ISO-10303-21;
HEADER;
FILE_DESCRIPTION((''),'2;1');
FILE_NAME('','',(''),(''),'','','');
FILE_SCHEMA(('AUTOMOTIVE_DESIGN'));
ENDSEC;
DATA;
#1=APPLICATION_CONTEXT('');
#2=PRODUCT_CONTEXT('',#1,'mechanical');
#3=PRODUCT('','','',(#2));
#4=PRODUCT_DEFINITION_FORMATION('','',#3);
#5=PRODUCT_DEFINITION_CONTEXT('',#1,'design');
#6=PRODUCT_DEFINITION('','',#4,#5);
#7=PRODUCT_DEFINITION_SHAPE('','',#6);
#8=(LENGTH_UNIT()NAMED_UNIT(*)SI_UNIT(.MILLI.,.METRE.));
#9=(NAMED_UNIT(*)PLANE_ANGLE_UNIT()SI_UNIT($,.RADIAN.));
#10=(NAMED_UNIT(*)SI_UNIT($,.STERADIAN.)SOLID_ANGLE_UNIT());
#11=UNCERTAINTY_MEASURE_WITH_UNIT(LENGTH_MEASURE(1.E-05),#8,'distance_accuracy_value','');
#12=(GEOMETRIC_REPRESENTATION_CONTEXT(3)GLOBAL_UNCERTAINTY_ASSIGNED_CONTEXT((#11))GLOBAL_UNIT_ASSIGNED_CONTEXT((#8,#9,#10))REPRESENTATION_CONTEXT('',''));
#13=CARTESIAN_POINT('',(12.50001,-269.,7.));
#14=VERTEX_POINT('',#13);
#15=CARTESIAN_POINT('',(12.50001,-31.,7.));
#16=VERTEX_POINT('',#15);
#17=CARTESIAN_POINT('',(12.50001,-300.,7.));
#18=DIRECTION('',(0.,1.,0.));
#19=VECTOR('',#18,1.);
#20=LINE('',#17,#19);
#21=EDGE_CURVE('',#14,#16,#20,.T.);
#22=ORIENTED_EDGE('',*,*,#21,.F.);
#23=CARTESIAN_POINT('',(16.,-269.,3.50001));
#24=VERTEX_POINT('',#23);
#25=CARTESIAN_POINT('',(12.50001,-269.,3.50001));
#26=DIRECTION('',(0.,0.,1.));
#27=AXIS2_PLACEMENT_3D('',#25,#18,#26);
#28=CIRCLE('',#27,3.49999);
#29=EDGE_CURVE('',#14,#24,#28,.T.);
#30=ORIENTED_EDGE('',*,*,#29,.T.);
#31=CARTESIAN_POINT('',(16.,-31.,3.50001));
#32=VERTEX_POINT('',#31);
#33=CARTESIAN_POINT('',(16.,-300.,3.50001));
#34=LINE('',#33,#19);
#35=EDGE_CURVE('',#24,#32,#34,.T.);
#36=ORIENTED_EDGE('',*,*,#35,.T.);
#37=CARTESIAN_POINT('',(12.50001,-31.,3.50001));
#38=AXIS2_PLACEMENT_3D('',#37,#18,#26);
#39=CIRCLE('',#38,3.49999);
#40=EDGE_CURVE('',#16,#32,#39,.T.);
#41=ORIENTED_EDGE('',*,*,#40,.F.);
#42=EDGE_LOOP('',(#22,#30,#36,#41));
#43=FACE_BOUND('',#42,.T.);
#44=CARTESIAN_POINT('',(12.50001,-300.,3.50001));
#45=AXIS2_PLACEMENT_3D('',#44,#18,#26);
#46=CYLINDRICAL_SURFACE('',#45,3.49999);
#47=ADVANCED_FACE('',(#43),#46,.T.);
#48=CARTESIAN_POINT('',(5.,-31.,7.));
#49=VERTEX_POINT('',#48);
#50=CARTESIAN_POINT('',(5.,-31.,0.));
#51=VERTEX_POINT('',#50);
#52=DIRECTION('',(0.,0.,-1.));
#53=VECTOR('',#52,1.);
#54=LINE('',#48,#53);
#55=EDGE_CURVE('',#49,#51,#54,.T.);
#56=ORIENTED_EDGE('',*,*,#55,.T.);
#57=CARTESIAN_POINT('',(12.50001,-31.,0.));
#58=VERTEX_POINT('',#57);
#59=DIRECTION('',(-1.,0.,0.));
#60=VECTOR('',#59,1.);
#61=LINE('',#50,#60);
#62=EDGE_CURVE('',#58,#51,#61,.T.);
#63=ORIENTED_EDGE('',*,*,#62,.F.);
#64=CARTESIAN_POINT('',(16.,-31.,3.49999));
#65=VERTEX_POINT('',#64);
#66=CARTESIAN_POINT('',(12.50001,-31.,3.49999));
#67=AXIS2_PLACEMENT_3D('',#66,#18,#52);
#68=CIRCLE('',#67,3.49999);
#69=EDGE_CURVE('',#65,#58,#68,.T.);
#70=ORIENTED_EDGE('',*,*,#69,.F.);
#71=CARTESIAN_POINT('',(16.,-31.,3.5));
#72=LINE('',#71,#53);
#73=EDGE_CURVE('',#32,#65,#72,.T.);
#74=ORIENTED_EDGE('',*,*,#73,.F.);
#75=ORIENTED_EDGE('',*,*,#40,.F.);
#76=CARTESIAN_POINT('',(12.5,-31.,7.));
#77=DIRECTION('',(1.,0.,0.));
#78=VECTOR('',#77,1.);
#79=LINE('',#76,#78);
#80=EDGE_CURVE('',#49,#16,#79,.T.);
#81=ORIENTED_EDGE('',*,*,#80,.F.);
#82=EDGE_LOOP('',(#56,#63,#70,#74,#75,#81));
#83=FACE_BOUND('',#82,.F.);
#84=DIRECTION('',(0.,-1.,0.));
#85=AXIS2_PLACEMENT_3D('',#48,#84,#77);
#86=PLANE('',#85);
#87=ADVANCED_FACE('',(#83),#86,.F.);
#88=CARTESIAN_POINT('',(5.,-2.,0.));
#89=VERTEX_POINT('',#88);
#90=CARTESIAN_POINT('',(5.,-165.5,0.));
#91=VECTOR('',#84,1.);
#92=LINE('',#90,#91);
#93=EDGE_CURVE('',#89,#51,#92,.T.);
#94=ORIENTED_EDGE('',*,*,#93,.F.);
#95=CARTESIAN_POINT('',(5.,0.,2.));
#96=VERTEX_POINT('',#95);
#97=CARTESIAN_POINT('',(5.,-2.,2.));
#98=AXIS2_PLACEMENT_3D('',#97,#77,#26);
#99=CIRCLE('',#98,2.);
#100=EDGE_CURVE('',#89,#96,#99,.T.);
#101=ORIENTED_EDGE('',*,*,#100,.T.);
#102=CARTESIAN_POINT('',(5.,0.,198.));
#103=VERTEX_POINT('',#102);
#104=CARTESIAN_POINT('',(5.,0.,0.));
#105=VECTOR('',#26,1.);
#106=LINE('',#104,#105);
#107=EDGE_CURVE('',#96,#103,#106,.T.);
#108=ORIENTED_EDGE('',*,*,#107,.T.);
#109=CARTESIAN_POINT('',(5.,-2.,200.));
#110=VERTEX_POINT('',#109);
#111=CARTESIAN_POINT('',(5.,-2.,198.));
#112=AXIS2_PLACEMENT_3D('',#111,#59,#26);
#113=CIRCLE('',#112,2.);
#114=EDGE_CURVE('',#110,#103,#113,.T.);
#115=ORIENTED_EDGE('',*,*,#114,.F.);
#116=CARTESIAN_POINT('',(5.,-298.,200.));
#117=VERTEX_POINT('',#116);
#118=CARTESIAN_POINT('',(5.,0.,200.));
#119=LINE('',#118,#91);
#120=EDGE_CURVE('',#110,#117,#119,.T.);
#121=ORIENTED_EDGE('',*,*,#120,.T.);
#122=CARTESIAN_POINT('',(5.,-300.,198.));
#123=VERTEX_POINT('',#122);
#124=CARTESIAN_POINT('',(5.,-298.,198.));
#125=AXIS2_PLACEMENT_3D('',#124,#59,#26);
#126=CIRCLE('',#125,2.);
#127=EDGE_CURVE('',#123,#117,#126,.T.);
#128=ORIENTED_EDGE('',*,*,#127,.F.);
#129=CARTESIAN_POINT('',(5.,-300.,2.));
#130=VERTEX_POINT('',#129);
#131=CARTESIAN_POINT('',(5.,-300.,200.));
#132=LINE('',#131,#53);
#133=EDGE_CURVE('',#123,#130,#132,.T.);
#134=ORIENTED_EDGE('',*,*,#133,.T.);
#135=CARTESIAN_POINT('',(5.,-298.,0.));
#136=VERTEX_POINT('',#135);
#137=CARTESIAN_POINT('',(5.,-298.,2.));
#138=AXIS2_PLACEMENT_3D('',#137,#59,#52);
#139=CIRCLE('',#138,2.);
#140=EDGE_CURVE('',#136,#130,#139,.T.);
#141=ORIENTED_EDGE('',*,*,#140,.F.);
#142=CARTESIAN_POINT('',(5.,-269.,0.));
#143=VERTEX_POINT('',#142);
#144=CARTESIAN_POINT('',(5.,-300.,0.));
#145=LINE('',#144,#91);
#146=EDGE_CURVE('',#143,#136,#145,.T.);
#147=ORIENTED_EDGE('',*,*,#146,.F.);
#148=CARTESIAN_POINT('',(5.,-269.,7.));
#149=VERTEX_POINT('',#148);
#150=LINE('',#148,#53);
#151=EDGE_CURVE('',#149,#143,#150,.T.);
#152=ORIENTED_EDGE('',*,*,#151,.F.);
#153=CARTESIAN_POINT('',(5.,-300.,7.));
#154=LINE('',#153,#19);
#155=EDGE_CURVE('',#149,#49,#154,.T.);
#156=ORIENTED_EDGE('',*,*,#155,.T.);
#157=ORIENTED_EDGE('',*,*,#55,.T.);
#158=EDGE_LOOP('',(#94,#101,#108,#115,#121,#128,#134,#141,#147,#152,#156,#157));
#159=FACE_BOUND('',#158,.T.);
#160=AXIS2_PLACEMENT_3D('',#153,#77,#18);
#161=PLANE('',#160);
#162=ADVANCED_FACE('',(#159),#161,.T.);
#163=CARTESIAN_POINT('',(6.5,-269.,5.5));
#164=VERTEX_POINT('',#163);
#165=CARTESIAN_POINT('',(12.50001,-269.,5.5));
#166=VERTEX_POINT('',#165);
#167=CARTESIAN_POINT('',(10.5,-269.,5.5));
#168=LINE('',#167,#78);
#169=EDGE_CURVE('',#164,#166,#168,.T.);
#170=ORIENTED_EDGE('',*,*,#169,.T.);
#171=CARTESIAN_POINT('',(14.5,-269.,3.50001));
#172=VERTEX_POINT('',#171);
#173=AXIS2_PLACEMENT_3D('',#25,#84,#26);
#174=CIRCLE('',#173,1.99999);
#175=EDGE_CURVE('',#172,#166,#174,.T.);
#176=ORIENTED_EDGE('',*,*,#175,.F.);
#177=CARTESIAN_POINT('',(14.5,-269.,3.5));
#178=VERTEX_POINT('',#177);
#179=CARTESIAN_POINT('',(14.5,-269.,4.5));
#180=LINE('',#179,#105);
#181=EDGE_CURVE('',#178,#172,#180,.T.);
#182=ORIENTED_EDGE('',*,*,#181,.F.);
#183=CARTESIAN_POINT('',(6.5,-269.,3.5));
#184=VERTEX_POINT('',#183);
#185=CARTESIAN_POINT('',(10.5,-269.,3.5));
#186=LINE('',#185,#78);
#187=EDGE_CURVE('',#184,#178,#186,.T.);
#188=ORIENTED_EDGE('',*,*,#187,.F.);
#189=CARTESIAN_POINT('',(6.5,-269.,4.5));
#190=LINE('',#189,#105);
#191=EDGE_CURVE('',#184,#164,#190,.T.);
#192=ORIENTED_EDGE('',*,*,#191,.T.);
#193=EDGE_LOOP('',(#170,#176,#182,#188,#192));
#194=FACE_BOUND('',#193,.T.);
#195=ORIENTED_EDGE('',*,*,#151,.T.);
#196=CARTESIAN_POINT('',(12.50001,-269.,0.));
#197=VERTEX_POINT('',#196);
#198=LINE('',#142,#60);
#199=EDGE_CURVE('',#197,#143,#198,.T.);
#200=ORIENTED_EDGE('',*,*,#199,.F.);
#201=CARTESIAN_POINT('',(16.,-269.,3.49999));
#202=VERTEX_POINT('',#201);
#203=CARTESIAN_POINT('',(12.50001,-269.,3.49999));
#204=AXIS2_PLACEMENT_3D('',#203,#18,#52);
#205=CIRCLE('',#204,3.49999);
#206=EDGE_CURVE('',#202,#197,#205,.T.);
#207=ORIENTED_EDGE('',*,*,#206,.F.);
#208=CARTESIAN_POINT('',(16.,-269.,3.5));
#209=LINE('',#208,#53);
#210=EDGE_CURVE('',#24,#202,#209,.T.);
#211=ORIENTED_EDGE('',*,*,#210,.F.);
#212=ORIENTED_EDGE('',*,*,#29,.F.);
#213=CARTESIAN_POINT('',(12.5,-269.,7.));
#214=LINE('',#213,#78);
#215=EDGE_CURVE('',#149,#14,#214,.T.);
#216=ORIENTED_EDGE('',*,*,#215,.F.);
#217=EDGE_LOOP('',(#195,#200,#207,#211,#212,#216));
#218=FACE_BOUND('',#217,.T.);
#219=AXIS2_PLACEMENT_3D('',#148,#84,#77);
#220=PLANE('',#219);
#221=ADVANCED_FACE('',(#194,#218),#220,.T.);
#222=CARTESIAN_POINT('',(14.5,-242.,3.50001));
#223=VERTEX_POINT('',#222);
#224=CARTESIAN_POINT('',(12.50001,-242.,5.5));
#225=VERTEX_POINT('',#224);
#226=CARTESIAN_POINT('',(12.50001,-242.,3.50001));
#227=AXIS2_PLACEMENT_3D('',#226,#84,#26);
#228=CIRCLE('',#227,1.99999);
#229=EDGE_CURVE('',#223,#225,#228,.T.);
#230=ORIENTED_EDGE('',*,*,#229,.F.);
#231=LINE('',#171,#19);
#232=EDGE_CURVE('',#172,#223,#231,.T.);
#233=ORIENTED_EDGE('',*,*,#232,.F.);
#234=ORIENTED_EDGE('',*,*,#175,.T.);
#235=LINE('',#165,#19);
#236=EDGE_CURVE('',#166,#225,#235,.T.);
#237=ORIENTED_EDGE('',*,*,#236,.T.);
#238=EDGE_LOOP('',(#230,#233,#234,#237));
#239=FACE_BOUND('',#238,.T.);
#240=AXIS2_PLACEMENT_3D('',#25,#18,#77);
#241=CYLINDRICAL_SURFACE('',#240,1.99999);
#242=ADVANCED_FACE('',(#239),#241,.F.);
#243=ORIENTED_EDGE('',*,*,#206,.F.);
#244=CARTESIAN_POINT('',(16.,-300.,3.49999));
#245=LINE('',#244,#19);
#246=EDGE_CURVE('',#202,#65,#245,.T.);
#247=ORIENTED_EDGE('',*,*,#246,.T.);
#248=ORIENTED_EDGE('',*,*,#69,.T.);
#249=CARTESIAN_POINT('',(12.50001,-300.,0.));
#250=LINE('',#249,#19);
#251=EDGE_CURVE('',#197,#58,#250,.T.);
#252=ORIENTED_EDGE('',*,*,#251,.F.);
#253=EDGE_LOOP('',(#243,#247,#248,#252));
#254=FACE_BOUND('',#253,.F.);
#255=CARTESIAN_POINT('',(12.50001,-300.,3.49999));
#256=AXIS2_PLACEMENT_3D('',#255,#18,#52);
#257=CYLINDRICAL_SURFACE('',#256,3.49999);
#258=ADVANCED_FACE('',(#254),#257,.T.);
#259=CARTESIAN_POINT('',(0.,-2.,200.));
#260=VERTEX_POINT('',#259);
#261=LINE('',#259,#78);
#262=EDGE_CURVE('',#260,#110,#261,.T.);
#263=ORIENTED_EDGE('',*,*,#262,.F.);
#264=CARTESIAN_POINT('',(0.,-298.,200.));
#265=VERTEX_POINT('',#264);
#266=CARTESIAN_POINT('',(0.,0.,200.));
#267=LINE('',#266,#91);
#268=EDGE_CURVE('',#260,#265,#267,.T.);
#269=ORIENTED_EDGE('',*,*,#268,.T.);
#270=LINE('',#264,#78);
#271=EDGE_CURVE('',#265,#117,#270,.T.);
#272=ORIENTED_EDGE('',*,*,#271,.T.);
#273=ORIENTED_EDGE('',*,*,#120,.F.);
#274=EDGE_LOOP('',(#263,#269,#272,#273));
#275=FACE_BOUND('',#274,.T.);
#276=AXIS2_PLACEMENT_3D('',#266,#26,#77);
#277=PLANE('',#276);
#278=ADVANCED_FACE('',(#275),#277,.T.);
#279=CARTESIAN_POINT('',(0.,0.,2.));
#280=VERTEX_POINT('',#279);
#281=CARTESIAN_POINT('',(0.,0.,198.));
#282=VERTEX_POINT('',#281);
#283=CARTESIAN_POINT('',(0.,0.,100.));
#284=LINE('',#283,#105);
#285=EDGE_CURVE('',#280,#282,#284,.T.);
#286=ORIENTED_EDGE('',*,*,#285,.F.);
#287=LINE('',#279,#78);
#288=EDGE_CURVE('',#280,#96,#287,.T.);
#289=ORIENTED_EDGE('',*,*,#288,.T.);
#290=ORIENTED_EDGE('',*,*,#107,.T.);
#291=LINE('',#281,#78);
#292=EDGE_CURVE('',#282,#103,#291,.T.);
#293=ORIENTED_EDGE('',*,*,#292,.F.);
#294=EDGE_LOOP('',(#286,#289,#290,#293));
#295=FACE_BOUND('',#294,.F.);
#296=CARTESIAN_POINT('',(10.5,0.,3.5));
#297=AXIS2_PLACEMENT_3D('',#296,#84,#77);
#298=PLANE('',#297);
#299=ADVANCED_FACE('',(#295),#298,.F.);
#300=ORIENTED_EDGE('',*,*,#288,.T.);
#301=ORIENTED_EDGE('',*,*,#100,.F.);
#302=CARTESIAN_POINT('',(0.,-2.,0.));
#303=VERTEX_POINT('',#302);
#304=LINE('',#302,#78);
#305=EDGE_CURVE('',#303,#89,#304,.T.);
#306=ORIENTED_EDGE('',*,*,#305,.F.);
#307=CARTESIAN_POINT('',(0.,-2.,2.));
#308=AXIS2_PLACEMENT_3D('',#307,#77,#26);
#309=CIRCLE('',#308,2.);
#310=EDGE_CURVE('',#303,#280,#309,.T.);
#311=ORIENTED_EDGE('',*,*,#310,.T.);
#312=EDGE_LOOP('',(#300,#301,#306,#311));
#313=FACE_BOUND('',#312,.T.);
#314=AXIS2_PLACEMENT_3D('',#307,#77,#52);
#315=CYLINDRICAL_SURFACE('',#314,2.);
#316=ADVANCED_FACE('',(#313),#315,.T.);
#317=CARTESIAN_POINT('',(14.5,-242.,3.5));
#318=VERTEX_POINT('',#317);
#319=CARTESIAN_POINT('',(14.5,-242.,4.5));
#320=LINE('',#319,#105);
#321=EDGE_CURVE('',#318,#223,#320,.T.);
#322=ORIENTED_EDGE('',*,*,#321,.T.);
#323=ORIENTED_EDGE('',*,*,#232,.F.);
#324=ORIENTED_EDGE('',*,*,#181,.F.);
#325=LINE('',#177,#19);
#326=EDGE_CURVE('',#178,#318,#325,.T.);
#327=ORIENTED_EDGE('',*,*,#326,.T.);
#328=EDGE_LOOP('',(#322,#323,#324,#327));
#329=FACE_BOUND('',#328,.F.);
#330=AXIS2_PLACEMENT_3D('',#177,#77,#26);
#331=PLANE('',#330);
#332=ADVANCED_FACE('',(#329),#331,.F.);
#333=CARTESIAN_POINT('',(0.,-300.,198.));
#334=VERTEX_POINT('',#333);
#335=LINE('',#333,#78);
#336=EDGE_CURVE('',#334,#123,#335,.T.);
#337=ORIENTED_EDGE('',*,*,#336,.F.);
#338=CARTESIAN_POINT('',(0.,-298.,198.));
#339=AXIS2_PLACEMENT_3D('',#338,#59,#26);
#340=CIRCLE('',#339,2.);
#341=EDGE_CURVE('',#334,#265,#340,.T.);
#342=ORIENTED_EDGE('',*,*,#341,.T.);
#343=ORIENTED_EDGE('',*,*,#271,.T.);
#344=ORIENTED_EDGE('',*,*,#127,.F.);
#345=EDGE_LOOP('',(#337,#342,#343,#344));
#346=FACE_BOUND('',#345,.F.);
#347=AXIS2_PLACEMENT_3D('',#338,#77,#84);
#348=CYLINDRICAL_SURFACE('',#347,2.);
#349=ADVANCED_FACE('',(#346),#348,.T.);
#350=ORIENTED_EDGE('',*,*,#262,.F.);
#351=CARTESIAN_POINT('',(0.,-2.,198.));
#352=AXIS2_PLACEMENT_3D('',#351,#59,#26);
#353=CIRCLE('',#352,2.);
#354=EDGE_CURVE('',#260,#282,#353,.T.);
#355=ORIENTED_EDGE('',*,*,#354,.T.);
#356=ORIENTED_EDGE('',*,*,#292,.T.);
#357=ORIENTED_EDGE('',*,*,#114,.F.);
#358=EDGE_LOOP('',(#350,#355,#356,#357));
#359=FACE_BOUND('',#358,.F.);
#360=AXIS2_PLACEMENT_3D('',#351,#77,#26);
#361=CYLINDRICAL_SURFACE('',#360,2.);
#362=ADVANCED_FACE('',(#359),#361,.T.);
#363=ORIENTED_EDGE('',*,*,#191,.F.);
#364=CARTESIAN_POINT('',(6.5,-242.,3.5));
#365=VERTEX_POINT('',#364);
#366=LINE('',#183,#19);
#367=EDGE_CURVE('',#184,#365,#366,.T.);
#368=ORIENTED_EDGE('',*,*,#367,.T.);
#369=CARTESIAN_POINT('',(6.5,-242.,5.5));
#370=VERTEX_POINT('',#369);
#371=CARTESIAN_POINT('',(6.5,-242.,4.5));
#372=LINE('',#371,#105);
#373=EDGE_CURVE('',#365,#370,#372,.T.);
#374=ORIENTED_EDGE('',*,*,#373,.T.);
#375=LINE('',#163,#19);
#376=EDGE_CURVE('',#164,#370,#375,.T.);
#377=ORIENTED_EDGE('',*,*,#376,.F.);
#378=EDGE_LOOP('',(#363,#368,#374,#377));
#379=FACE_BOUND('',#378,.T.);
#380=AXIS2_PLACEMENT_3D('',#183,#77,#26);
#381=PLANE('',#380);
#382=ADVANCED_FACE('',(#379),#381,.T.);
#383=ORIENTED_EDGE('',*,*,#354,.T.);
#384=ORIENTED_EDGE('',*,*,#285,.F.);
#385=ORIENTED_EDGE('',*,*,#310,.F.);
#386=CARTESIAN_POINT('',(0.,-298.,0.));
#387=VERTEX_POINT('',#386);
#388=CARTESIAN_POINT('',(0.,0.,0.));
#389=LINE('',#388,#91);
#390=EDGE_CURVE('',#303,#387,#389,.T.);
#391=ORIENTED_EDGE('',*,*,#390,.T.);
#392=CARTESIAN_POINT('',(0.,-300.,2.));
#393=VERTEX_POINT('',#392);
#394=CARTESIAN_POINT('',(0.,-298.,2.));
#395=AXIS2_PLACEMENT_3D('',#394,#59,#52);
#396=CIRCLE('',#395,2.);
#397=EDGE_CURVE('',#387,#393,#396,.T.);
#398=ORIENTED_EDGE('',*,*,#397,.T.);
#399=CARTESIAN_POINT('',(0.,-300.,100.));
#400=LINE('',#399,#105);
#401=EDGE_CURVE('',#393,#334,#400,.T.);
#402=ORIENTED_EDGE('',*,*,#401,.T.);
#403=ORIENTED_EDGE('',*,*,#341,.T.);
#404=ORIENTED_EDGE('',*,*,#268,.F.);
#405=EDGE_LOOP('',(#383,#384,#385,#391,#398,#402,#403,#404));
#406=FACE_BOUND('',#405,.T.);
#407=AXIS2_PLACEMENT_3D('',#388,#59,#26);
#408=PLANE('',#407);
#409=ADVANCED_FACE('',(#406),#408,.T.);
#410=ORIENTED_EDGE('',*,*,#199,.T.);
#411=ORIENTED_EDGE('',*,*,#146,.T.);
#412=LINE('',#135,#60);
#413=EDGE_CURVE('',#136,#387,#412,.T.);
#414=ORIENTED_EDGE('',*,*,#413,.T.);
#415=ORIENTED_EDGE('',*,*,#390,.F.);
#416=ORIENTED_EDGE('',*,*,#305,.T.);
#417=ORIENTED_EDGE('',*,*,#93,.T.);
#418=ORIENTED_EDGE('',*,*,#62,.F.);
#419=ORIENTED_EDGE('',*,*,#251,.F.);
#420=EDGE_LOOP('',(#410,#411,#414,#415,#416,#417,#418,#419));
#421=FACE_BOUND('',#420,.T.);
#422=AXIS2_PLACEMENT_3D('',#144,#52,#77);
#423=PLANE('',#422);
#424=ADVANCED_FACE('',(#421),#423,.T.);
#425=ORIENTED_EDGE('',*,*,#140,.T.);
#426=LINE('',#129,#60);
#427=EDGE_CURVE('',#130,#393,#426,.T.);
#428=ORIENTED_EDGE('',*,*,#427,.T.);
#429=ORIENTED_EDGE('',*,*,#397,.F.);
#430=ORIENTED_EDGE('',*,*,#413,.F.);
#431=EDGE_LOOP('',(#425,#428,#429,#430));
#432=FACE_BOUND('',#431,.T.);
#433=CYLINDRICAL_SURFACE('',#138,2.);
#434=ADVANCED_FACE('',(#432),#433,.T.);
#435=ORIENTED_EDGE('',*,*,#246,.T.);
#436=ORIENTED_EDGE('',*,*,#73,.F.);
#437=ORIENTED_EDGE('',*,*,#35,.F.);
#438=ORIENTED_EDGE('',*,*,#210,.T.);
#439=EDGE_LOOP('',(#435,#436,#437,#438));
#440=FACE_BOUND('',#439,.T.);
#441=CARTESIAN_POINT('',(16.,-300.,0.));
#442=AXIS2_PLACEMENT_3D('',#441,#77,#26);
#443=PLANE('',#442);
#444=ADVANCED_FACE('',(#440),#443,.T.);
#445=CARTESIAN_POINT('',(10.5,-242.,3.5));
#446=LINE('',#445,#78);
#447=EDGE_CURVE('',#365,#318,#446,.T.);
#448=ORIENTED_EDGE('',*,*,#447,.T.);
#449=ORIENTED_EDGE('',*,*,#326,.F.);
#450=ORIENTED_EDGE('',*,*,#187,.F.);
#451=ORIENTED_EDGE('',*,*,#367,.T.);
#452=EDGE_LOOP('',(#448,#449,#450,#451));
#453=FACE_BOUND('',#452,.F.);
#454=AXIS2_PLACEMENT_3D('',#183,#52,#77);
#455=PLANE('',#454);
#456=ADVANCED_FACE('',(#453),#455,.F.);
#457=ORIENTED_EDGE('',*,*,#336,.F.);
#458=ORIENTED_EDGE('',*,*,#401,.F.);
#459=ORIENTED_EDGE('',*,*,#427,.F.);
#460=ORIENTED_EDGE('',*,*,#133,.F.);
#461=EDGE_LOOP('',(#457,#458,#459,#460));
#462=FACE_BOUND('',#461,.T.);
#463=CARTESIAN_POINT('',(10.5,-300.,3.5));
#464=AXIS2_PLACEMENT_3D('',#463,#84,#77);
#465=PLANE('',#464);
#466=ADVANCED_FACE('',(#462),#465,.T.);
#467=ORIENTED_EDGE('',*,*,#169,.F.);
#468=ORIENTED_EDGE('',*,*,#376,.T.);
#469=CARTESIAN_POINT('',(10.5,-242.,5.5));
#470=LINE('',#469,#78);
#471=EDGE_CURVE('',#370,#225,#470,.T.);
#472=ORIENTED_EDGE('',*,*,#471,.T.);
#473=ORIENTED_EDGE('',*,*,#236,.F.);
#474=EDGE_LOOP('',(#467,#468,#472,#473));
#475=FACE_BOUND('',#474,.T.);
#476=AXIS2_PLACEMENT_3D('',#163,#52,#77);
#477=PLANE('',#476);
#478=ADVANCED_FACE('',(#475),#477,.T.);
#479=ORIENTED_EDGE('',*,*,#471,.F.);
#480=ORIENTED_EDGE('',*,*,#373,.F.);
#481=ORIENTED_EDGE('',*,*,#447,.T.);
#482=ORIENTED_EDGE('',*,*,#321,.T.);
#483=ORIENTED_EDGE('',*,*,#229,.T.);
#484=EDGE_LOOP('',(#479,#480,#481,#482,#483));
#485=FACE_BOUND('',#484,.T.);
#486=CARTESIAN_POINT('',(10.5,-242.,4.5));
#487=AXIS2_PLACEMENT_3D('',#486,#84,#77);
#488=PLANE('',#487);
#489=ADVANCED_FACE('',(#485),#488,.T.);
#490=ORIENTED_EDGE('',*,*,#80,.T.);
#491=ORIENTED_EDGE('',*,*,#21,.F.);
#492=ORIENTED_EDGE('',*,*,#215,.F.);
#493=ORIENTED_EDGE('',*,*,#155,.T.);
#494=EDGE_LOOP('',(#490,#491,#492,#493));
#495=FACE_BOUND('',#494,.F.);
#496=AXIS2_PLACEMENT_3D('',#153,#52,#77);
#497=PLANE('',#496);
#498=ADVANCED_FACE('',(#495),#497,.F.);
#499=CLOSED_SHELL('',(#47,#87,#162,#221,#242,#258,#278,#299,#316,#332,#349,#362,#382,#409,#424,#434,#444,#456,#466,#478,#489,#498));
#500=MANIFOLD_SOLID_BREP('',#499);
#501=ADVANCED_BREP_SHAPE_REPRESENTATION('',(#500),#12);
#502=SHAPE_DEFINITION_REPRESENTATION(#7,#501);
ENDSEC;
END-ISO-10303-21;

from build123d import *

# Parameters (mm, degrees)
F0_W     = 5
F0_H     = 200
F1_DEPTH = 300
F2_W     = 11
F2_H     = 7
F3_DEPTH = 300
F4_R     = 3.49999
F5_W     = 15
F5_H     = 31
F6_DEPTH = 7.001
F7_R     = 2
F8_W     = 8
F8_H     = 2
F9_DEPTH = 27
F10_R    = 1.99999


# Not quite as in the source:
# - a fillet or chamfer is up to 0.001 mm smaller than in the source, because OpenCascade refuses the exact size


with BuildPart() as f1:
    # F0 (on Front) → F1 (new body)
    with BuildSketch(Plane.XZ):
        with Locations((2.5, 100)):
            Rectangle(F0_W, F0_H)
    extrude(amount=F1_DEPTH)

    # F2 (on face) → F3 (join)
    with BuildSketch(Plane.XZ.offset(300)):
        with Locations((10.5, 3.5)):
            Rectangle(F2_W, F2_H)
    extrude(amount=-F3_DEPTH)

    # F4 (radius 3.5 in the source; OpenCascade refuses exactly that, so slightly less here)
    f4_edges = [f1.edges().sort_by_distance(p)[0] for p in [
        (16, -150, 7),
        (16, -150, 0),
    ]]
    fillet(f4_edges, radius=F4_R)

    # F5 (on face) → F6 (cut, through all)
    with BuildSketch(Plane.XY.offset(7)):
        with Locations((12.5, -284.5)):
            Rectangle(F5_W, F5_H)
        with Locations((12.5, -15.5)):
            Rectangle(F5_W, F5_H)
    extrude(amount=-F6_DEPTH, mode=Mode.SUBTRACT)

    # F7
    f7_edges = [f1.edges().sort_by_distance(p)[0] for p in [
        (2.5, -300, 200),
        (2.5, 0, 200),
        (2.5, -300, 0),
        (2.5, 0, 0),
    ]]
    fillet(f7_edges, radius=F7_R)

    # F8 (on face) → F9 (cut)
    with BuildSketch(Plane.XZ.offset(269)):
        with Locations((10.5, 4.5)):
            Rectangle(F8_W, F8_H)
    extrude(amount=-F9_DEPTH, mode=Mode.SUBTRACT)

    # F10 (radius 2 in the source; OpenCascade refuses exactly that, so slightly less here)
    f10_edges = [f1.edges().sort_by_distance(p)[0] for p in [
        (14.5, -255.5, 5.5),
    ]]
    fillet(f10_edges, radius=F10_R)


solid = f1.part
